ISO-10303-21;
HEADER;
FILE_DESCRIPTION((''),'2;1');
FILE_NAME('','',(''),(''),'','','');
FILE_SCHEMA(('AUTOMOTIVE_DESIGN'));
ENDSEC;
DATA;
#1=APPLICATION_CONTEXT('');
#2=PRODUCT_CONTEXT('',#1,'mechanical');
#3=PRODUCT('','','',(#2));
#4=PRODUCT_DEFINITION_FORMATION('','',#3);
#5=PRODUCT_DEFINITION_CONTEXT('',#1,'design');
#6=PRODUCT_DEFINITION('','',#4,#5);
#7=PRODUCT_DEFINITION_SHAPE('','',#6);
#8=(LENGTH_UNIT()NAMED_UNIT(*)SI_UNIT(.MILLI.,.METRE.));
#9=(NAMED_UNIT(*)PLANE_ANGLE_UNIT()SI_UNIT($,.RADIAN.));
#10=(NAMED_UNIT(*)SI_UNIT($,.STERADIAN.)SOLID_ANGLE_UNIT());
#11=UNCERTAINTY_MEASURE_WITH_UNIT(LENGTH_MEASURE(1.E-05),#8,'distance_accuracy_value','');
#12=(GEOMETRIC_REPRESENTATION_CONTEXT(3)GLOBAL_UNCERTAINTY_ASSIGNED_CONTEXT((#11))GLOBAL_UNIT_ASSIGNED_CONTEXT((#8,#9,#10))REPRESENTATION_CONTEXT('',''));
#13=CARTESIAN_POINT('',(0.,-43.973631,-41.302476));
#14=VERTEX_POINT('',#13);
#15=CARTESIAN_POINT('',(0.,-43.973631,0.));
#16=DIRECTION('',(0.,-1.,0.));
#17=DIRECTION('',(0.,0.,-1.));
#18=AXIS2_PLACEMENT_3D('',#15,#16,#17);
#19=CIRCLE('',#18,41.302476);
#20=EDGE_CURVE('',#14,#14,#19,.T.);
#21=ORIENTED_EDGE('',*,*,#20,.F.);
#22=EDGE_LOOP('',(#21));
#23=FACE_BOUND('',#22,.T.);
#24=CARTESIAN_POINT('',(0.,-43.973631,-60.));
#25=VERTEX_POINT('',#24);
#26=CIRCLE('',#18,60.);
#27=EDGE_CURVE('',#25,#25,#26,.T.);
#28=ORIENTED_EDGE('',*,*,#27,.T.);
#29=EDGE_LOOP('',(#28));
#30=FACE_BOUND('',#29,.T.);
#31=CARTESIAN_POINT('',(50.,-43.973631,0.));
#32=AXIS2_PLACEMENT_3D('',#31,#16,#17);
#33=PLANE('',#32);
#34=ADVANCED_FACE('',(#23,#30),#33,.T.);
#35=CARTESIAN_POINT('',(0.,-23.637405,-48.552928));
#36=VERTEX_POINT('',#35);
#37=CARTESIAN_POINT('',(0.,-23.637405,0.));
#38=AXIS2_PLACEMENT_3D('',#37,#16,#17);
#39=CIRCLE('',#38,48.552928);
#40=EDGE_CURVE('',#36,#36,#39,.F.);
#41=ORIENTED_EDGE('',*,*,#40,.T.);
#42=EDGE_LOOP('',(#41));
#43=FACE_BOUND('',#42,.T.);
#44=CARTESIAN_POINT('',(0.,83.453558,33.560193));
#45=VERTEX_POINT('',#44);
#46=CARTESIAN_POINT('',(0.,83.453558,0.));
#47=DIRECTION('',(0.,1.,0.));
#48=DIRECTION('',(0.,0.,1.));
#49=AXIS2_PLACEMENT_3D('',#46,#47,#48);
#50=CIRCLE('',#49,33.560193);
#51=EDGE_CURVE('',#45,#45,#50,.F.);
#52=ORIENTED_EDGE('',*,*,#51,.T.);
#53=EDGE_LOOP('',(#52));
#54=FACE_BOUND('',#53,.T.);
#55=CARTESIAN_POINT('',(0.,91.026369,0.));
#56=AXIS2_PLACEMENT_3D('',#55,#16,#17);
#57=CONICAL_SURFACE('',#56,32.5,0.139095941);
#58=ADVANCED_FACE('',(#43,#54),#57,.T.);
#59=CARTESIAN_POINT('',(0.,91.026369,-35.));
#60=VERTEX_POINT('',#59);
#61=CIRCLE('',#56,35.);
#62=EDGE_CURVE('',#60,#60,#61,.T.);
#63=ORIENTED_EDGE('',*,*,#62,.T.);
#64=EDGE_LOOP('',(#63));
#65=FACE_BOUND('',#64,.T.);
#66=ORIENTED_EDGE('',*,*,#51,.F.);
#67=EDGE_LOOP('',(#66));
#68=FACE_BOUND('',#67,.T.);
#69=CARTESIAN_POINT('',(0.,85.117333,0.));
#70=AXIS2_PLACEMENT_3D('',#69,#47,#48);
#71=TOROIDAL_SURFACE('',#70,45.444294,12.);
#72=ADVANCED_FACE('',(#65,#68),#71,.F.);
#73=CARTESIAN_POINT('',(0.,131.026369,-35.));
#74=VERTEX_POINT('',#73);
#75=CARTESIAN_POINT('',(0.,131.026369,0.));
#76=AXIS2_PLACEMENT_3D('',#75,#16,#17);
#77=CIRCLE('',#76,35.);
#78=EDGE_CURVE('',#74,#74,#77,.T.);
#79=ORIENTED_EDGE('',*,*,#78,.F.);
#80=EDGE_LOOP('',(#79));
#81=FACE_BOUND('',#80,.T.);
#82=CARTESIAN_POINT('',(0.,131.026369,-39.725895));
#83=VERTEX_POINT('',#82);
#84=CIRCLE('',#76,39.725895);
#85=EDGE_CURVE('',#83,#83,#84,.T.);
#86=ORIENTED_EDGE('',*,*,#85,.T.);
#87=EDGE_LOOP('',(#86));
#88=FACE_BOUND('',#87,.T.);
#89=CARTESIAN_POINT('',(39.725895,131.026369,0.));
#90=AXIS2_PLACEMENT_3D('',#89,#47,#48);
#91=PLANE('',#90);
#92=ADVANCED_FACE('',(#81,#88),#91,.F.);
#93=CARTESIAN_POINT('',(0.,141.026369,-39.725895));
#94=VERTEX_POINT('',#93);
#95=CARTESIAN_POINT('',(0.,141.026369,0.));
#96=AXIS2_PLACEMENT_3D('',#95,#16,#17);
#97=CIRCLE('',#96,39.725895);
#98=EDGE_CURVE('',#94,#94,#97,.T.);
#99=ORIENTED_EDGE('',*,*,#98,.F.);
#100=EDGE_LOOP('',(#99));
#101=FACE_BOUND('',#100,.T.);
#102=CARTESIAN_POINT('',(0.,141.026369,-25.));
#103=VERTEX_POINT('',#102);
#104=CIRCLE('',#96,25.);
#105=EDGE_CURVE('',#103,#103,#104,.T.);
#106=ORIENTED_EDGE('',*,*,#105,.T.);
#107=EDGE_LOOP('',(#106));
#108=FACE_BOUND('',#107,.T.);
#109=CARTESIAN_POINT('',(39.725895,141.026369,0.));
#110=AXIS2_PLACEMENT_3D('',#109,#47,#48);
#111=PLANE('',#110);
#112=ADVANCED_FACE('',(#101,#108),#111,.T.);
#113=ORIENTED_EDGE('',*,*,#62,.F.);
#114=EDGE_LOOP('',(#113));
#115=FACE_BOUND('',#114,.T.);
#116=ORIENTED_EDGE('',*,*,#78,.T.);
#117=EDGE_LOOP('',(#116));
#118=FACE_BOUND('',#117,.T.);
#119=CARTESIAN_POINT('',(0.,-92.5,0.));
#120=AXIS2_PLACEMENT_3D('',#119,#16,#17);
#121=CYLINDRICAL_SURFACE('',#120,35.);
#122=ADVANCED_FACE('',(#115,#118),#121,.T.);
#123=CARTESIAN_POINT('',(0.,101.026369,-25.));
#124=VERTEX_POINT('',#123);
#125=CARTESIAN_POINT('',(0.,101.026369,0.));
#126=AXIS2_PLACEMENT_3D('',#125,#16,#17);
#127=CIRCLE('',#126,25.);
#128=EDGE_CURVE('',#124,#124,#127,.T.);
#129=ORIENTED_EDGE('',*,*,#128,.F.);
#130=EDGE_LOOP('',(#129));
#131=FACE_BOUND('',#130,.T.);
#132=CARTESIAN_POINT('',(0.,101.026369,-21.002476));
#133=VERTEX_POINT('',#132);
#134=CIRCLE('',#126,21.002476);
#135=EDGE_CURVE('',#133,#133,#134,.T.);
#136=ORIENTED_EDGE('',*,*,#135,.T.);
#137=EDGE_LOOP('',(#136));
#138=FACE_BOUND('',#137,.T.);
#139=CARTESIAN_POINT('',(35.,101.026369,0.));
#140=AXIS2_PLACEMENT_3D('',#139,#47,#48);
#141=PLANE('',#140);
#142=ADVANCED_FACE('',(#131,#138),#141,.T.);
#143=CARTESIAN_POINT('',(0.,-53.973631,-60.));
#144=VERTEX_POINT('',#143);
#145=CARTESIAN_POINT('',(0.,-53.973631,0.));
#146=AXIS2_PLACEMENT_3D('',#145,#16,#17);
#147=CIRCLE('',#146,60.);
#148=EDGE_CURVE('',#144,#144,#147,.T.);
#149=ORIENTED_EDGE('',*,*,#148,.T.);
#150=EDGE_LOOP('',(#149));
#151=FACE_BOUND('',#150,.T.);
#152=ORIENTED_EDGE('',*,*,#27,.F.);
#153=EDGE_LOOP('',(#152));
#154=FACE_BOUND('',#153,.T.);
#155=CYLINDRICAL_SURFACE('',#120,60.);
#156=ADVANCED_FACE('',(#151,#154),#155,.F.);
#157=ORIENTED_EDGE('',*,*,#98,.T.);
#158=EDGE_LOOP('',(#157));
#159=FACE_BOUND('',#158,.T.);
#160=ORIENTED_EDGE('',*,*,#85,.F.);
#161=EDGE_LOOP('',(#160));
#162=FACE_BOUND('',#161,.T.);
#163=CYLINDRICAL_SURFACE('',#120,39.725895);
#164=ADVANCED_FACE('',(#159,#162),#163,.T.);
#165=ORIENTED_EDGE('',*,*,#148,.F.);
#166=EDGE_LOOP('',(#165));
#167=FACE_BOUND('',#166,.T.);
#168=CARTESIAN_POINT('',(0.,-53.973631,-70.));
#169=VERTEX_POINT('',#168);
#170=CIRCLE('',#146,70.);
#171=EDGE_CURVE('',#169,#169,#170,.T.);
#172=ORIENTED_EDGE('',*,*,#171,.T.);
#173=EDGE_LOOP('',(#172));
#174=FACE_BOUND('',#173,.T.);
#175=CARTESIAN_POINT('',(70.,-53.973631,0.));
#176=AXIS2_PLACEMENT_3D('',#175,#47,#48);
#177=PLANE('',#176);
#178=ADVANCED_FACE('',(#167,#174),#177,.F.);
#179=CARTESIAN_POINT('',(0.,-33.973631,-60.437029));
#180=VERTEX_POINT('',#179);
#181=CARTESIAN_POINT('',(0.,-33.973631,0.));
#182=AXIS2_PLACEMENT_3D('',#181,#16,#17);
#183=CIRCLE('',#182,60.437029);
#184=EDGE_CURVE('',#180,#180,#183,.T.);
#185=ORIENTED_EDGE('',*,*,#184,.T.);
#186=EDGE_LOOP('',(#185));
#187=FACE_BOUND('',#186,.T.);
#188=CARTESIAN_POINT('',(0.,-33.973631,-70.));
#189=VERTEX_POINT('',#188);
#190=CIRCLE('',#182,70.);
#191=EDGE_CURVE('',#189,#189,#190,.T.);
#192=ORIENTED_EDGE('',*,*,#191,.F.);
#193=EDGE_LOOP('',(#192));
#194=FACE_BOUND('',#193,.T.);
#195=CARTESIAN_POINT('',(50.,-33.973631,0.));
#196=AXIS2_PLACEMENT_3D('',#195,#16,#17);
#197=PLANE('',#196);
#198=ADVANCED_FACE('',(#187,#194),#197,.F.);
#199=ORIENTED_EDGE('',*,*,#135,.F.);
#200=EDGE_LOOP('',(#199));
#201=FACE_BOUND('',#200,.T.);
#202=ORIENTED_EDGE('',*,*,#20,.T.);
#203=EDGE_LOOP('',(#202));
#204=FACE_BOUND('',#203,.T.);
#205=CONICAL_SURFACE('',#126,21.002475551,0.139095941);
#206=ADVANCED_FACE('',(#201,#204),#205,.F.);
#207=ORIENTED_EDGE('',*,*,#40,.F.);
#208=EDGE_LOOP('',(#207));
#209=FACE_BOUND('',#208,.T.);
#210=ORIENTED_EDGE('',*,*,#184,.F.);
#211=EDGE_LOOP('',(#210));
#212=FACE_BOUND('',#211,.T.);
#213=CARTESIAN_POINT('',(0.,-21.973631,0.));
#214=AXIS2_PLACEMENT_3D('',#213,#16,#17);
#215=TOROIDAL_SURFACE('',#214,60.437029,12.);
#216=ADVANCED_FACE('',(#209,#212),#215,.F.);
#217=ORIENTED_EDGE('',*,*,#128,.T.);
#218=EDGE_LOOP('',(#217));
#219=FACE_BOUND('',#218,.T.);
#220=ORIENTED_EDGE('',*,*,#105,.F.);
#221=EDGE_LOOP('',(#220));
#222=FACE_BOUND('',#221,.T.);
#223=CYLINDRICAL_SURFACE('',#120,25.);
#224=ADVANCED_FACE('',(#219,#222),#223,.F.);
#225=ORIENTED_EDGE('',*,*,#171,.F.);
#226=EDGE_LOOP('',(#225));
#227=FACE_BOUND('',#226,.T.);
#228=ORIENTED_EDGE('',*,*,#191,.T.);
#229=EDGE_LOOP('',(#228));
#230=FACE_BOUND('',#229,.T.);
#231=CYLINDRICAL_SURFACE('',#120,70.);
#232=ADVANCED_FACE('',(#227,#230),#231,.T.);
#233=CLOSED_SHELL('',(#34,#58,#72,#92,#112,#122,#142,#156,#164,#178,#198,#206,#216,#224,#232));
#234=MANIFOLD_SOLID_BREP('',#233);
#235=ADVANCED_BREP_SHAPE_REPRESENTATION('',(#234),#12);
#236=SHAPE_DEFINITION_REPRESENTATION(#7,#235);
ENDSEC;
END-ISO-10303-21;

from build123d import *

# Parameters (mm, degrees)
FILLET1_R = 12
FILLET2_R = 12


with BuildPart() as part:
    # Sketch2 → Revolve-Thin2 (revolve)
    with BuildSketch(Plane.XY, mode=Mode.PRIVATE) as revolve_thin2_sk:
        Polygon((39.725895331, 131.026369151), (35, 131.026369151), (35, 91.026369151), (32.5, 91.026369151), (50, -33.973630849), (70, -33.973630849), (70, -53.973630849), (60, -53.973630849), (60, -43.973630849), (41.302475551, -43.973630849), (21.002475551, 101.026369151), (25, 101.026369151), (25, 141.026369151), (39.725895331, 141.026369151), align=None)
    revolve(revolve_thin2_sk.sketch.rotate(Axis((0, -92.5, 0), (0, 1, 0)), 90), axis=Axis((0, -92.5, 0), (0, 1, 0)))

    # Fillet1
    # the kernel refuses this fillet: 12 mm, written as the material it adds along each edge
    with BuildSketch(Plane(origin=(0, 91.026369151, 0), x_dir=(0, 0, -1), z_dir=(1, 0, 0))) as fillet1_piece_1:
        with BuildLine():
            CenterArc((45.444294459, -5.909036575), FILLET1_R, 150.500253151, 37.469357243)
            Line((33.560193499, -7.572810709), (33.32251148, -7.606086192))
            Line((33.32251148, -7.606086192), (32.262317981, -0.033275483))
            Line((32.262317981, -0.033275483), (32.5, 0.24))
            ThreePointArc((32.5, 0.24), (33.75, 0.24), (34.791114111, 0.118180731))
            Line((34.791114111, 0.118180731), (35, 0))
        make_face()
    revolve(axis=Axis((0, 91.026369151, 0), (0, 1, 0)))

    # Fillet2
    fillet2_edges = [part.edges().sort_by_distance(p)[0] for p in [
        (0, -33.973630849, 50),
    ]]
    fillet(fillet2_edges, radius=FILLET2_R)


solid = part.part
